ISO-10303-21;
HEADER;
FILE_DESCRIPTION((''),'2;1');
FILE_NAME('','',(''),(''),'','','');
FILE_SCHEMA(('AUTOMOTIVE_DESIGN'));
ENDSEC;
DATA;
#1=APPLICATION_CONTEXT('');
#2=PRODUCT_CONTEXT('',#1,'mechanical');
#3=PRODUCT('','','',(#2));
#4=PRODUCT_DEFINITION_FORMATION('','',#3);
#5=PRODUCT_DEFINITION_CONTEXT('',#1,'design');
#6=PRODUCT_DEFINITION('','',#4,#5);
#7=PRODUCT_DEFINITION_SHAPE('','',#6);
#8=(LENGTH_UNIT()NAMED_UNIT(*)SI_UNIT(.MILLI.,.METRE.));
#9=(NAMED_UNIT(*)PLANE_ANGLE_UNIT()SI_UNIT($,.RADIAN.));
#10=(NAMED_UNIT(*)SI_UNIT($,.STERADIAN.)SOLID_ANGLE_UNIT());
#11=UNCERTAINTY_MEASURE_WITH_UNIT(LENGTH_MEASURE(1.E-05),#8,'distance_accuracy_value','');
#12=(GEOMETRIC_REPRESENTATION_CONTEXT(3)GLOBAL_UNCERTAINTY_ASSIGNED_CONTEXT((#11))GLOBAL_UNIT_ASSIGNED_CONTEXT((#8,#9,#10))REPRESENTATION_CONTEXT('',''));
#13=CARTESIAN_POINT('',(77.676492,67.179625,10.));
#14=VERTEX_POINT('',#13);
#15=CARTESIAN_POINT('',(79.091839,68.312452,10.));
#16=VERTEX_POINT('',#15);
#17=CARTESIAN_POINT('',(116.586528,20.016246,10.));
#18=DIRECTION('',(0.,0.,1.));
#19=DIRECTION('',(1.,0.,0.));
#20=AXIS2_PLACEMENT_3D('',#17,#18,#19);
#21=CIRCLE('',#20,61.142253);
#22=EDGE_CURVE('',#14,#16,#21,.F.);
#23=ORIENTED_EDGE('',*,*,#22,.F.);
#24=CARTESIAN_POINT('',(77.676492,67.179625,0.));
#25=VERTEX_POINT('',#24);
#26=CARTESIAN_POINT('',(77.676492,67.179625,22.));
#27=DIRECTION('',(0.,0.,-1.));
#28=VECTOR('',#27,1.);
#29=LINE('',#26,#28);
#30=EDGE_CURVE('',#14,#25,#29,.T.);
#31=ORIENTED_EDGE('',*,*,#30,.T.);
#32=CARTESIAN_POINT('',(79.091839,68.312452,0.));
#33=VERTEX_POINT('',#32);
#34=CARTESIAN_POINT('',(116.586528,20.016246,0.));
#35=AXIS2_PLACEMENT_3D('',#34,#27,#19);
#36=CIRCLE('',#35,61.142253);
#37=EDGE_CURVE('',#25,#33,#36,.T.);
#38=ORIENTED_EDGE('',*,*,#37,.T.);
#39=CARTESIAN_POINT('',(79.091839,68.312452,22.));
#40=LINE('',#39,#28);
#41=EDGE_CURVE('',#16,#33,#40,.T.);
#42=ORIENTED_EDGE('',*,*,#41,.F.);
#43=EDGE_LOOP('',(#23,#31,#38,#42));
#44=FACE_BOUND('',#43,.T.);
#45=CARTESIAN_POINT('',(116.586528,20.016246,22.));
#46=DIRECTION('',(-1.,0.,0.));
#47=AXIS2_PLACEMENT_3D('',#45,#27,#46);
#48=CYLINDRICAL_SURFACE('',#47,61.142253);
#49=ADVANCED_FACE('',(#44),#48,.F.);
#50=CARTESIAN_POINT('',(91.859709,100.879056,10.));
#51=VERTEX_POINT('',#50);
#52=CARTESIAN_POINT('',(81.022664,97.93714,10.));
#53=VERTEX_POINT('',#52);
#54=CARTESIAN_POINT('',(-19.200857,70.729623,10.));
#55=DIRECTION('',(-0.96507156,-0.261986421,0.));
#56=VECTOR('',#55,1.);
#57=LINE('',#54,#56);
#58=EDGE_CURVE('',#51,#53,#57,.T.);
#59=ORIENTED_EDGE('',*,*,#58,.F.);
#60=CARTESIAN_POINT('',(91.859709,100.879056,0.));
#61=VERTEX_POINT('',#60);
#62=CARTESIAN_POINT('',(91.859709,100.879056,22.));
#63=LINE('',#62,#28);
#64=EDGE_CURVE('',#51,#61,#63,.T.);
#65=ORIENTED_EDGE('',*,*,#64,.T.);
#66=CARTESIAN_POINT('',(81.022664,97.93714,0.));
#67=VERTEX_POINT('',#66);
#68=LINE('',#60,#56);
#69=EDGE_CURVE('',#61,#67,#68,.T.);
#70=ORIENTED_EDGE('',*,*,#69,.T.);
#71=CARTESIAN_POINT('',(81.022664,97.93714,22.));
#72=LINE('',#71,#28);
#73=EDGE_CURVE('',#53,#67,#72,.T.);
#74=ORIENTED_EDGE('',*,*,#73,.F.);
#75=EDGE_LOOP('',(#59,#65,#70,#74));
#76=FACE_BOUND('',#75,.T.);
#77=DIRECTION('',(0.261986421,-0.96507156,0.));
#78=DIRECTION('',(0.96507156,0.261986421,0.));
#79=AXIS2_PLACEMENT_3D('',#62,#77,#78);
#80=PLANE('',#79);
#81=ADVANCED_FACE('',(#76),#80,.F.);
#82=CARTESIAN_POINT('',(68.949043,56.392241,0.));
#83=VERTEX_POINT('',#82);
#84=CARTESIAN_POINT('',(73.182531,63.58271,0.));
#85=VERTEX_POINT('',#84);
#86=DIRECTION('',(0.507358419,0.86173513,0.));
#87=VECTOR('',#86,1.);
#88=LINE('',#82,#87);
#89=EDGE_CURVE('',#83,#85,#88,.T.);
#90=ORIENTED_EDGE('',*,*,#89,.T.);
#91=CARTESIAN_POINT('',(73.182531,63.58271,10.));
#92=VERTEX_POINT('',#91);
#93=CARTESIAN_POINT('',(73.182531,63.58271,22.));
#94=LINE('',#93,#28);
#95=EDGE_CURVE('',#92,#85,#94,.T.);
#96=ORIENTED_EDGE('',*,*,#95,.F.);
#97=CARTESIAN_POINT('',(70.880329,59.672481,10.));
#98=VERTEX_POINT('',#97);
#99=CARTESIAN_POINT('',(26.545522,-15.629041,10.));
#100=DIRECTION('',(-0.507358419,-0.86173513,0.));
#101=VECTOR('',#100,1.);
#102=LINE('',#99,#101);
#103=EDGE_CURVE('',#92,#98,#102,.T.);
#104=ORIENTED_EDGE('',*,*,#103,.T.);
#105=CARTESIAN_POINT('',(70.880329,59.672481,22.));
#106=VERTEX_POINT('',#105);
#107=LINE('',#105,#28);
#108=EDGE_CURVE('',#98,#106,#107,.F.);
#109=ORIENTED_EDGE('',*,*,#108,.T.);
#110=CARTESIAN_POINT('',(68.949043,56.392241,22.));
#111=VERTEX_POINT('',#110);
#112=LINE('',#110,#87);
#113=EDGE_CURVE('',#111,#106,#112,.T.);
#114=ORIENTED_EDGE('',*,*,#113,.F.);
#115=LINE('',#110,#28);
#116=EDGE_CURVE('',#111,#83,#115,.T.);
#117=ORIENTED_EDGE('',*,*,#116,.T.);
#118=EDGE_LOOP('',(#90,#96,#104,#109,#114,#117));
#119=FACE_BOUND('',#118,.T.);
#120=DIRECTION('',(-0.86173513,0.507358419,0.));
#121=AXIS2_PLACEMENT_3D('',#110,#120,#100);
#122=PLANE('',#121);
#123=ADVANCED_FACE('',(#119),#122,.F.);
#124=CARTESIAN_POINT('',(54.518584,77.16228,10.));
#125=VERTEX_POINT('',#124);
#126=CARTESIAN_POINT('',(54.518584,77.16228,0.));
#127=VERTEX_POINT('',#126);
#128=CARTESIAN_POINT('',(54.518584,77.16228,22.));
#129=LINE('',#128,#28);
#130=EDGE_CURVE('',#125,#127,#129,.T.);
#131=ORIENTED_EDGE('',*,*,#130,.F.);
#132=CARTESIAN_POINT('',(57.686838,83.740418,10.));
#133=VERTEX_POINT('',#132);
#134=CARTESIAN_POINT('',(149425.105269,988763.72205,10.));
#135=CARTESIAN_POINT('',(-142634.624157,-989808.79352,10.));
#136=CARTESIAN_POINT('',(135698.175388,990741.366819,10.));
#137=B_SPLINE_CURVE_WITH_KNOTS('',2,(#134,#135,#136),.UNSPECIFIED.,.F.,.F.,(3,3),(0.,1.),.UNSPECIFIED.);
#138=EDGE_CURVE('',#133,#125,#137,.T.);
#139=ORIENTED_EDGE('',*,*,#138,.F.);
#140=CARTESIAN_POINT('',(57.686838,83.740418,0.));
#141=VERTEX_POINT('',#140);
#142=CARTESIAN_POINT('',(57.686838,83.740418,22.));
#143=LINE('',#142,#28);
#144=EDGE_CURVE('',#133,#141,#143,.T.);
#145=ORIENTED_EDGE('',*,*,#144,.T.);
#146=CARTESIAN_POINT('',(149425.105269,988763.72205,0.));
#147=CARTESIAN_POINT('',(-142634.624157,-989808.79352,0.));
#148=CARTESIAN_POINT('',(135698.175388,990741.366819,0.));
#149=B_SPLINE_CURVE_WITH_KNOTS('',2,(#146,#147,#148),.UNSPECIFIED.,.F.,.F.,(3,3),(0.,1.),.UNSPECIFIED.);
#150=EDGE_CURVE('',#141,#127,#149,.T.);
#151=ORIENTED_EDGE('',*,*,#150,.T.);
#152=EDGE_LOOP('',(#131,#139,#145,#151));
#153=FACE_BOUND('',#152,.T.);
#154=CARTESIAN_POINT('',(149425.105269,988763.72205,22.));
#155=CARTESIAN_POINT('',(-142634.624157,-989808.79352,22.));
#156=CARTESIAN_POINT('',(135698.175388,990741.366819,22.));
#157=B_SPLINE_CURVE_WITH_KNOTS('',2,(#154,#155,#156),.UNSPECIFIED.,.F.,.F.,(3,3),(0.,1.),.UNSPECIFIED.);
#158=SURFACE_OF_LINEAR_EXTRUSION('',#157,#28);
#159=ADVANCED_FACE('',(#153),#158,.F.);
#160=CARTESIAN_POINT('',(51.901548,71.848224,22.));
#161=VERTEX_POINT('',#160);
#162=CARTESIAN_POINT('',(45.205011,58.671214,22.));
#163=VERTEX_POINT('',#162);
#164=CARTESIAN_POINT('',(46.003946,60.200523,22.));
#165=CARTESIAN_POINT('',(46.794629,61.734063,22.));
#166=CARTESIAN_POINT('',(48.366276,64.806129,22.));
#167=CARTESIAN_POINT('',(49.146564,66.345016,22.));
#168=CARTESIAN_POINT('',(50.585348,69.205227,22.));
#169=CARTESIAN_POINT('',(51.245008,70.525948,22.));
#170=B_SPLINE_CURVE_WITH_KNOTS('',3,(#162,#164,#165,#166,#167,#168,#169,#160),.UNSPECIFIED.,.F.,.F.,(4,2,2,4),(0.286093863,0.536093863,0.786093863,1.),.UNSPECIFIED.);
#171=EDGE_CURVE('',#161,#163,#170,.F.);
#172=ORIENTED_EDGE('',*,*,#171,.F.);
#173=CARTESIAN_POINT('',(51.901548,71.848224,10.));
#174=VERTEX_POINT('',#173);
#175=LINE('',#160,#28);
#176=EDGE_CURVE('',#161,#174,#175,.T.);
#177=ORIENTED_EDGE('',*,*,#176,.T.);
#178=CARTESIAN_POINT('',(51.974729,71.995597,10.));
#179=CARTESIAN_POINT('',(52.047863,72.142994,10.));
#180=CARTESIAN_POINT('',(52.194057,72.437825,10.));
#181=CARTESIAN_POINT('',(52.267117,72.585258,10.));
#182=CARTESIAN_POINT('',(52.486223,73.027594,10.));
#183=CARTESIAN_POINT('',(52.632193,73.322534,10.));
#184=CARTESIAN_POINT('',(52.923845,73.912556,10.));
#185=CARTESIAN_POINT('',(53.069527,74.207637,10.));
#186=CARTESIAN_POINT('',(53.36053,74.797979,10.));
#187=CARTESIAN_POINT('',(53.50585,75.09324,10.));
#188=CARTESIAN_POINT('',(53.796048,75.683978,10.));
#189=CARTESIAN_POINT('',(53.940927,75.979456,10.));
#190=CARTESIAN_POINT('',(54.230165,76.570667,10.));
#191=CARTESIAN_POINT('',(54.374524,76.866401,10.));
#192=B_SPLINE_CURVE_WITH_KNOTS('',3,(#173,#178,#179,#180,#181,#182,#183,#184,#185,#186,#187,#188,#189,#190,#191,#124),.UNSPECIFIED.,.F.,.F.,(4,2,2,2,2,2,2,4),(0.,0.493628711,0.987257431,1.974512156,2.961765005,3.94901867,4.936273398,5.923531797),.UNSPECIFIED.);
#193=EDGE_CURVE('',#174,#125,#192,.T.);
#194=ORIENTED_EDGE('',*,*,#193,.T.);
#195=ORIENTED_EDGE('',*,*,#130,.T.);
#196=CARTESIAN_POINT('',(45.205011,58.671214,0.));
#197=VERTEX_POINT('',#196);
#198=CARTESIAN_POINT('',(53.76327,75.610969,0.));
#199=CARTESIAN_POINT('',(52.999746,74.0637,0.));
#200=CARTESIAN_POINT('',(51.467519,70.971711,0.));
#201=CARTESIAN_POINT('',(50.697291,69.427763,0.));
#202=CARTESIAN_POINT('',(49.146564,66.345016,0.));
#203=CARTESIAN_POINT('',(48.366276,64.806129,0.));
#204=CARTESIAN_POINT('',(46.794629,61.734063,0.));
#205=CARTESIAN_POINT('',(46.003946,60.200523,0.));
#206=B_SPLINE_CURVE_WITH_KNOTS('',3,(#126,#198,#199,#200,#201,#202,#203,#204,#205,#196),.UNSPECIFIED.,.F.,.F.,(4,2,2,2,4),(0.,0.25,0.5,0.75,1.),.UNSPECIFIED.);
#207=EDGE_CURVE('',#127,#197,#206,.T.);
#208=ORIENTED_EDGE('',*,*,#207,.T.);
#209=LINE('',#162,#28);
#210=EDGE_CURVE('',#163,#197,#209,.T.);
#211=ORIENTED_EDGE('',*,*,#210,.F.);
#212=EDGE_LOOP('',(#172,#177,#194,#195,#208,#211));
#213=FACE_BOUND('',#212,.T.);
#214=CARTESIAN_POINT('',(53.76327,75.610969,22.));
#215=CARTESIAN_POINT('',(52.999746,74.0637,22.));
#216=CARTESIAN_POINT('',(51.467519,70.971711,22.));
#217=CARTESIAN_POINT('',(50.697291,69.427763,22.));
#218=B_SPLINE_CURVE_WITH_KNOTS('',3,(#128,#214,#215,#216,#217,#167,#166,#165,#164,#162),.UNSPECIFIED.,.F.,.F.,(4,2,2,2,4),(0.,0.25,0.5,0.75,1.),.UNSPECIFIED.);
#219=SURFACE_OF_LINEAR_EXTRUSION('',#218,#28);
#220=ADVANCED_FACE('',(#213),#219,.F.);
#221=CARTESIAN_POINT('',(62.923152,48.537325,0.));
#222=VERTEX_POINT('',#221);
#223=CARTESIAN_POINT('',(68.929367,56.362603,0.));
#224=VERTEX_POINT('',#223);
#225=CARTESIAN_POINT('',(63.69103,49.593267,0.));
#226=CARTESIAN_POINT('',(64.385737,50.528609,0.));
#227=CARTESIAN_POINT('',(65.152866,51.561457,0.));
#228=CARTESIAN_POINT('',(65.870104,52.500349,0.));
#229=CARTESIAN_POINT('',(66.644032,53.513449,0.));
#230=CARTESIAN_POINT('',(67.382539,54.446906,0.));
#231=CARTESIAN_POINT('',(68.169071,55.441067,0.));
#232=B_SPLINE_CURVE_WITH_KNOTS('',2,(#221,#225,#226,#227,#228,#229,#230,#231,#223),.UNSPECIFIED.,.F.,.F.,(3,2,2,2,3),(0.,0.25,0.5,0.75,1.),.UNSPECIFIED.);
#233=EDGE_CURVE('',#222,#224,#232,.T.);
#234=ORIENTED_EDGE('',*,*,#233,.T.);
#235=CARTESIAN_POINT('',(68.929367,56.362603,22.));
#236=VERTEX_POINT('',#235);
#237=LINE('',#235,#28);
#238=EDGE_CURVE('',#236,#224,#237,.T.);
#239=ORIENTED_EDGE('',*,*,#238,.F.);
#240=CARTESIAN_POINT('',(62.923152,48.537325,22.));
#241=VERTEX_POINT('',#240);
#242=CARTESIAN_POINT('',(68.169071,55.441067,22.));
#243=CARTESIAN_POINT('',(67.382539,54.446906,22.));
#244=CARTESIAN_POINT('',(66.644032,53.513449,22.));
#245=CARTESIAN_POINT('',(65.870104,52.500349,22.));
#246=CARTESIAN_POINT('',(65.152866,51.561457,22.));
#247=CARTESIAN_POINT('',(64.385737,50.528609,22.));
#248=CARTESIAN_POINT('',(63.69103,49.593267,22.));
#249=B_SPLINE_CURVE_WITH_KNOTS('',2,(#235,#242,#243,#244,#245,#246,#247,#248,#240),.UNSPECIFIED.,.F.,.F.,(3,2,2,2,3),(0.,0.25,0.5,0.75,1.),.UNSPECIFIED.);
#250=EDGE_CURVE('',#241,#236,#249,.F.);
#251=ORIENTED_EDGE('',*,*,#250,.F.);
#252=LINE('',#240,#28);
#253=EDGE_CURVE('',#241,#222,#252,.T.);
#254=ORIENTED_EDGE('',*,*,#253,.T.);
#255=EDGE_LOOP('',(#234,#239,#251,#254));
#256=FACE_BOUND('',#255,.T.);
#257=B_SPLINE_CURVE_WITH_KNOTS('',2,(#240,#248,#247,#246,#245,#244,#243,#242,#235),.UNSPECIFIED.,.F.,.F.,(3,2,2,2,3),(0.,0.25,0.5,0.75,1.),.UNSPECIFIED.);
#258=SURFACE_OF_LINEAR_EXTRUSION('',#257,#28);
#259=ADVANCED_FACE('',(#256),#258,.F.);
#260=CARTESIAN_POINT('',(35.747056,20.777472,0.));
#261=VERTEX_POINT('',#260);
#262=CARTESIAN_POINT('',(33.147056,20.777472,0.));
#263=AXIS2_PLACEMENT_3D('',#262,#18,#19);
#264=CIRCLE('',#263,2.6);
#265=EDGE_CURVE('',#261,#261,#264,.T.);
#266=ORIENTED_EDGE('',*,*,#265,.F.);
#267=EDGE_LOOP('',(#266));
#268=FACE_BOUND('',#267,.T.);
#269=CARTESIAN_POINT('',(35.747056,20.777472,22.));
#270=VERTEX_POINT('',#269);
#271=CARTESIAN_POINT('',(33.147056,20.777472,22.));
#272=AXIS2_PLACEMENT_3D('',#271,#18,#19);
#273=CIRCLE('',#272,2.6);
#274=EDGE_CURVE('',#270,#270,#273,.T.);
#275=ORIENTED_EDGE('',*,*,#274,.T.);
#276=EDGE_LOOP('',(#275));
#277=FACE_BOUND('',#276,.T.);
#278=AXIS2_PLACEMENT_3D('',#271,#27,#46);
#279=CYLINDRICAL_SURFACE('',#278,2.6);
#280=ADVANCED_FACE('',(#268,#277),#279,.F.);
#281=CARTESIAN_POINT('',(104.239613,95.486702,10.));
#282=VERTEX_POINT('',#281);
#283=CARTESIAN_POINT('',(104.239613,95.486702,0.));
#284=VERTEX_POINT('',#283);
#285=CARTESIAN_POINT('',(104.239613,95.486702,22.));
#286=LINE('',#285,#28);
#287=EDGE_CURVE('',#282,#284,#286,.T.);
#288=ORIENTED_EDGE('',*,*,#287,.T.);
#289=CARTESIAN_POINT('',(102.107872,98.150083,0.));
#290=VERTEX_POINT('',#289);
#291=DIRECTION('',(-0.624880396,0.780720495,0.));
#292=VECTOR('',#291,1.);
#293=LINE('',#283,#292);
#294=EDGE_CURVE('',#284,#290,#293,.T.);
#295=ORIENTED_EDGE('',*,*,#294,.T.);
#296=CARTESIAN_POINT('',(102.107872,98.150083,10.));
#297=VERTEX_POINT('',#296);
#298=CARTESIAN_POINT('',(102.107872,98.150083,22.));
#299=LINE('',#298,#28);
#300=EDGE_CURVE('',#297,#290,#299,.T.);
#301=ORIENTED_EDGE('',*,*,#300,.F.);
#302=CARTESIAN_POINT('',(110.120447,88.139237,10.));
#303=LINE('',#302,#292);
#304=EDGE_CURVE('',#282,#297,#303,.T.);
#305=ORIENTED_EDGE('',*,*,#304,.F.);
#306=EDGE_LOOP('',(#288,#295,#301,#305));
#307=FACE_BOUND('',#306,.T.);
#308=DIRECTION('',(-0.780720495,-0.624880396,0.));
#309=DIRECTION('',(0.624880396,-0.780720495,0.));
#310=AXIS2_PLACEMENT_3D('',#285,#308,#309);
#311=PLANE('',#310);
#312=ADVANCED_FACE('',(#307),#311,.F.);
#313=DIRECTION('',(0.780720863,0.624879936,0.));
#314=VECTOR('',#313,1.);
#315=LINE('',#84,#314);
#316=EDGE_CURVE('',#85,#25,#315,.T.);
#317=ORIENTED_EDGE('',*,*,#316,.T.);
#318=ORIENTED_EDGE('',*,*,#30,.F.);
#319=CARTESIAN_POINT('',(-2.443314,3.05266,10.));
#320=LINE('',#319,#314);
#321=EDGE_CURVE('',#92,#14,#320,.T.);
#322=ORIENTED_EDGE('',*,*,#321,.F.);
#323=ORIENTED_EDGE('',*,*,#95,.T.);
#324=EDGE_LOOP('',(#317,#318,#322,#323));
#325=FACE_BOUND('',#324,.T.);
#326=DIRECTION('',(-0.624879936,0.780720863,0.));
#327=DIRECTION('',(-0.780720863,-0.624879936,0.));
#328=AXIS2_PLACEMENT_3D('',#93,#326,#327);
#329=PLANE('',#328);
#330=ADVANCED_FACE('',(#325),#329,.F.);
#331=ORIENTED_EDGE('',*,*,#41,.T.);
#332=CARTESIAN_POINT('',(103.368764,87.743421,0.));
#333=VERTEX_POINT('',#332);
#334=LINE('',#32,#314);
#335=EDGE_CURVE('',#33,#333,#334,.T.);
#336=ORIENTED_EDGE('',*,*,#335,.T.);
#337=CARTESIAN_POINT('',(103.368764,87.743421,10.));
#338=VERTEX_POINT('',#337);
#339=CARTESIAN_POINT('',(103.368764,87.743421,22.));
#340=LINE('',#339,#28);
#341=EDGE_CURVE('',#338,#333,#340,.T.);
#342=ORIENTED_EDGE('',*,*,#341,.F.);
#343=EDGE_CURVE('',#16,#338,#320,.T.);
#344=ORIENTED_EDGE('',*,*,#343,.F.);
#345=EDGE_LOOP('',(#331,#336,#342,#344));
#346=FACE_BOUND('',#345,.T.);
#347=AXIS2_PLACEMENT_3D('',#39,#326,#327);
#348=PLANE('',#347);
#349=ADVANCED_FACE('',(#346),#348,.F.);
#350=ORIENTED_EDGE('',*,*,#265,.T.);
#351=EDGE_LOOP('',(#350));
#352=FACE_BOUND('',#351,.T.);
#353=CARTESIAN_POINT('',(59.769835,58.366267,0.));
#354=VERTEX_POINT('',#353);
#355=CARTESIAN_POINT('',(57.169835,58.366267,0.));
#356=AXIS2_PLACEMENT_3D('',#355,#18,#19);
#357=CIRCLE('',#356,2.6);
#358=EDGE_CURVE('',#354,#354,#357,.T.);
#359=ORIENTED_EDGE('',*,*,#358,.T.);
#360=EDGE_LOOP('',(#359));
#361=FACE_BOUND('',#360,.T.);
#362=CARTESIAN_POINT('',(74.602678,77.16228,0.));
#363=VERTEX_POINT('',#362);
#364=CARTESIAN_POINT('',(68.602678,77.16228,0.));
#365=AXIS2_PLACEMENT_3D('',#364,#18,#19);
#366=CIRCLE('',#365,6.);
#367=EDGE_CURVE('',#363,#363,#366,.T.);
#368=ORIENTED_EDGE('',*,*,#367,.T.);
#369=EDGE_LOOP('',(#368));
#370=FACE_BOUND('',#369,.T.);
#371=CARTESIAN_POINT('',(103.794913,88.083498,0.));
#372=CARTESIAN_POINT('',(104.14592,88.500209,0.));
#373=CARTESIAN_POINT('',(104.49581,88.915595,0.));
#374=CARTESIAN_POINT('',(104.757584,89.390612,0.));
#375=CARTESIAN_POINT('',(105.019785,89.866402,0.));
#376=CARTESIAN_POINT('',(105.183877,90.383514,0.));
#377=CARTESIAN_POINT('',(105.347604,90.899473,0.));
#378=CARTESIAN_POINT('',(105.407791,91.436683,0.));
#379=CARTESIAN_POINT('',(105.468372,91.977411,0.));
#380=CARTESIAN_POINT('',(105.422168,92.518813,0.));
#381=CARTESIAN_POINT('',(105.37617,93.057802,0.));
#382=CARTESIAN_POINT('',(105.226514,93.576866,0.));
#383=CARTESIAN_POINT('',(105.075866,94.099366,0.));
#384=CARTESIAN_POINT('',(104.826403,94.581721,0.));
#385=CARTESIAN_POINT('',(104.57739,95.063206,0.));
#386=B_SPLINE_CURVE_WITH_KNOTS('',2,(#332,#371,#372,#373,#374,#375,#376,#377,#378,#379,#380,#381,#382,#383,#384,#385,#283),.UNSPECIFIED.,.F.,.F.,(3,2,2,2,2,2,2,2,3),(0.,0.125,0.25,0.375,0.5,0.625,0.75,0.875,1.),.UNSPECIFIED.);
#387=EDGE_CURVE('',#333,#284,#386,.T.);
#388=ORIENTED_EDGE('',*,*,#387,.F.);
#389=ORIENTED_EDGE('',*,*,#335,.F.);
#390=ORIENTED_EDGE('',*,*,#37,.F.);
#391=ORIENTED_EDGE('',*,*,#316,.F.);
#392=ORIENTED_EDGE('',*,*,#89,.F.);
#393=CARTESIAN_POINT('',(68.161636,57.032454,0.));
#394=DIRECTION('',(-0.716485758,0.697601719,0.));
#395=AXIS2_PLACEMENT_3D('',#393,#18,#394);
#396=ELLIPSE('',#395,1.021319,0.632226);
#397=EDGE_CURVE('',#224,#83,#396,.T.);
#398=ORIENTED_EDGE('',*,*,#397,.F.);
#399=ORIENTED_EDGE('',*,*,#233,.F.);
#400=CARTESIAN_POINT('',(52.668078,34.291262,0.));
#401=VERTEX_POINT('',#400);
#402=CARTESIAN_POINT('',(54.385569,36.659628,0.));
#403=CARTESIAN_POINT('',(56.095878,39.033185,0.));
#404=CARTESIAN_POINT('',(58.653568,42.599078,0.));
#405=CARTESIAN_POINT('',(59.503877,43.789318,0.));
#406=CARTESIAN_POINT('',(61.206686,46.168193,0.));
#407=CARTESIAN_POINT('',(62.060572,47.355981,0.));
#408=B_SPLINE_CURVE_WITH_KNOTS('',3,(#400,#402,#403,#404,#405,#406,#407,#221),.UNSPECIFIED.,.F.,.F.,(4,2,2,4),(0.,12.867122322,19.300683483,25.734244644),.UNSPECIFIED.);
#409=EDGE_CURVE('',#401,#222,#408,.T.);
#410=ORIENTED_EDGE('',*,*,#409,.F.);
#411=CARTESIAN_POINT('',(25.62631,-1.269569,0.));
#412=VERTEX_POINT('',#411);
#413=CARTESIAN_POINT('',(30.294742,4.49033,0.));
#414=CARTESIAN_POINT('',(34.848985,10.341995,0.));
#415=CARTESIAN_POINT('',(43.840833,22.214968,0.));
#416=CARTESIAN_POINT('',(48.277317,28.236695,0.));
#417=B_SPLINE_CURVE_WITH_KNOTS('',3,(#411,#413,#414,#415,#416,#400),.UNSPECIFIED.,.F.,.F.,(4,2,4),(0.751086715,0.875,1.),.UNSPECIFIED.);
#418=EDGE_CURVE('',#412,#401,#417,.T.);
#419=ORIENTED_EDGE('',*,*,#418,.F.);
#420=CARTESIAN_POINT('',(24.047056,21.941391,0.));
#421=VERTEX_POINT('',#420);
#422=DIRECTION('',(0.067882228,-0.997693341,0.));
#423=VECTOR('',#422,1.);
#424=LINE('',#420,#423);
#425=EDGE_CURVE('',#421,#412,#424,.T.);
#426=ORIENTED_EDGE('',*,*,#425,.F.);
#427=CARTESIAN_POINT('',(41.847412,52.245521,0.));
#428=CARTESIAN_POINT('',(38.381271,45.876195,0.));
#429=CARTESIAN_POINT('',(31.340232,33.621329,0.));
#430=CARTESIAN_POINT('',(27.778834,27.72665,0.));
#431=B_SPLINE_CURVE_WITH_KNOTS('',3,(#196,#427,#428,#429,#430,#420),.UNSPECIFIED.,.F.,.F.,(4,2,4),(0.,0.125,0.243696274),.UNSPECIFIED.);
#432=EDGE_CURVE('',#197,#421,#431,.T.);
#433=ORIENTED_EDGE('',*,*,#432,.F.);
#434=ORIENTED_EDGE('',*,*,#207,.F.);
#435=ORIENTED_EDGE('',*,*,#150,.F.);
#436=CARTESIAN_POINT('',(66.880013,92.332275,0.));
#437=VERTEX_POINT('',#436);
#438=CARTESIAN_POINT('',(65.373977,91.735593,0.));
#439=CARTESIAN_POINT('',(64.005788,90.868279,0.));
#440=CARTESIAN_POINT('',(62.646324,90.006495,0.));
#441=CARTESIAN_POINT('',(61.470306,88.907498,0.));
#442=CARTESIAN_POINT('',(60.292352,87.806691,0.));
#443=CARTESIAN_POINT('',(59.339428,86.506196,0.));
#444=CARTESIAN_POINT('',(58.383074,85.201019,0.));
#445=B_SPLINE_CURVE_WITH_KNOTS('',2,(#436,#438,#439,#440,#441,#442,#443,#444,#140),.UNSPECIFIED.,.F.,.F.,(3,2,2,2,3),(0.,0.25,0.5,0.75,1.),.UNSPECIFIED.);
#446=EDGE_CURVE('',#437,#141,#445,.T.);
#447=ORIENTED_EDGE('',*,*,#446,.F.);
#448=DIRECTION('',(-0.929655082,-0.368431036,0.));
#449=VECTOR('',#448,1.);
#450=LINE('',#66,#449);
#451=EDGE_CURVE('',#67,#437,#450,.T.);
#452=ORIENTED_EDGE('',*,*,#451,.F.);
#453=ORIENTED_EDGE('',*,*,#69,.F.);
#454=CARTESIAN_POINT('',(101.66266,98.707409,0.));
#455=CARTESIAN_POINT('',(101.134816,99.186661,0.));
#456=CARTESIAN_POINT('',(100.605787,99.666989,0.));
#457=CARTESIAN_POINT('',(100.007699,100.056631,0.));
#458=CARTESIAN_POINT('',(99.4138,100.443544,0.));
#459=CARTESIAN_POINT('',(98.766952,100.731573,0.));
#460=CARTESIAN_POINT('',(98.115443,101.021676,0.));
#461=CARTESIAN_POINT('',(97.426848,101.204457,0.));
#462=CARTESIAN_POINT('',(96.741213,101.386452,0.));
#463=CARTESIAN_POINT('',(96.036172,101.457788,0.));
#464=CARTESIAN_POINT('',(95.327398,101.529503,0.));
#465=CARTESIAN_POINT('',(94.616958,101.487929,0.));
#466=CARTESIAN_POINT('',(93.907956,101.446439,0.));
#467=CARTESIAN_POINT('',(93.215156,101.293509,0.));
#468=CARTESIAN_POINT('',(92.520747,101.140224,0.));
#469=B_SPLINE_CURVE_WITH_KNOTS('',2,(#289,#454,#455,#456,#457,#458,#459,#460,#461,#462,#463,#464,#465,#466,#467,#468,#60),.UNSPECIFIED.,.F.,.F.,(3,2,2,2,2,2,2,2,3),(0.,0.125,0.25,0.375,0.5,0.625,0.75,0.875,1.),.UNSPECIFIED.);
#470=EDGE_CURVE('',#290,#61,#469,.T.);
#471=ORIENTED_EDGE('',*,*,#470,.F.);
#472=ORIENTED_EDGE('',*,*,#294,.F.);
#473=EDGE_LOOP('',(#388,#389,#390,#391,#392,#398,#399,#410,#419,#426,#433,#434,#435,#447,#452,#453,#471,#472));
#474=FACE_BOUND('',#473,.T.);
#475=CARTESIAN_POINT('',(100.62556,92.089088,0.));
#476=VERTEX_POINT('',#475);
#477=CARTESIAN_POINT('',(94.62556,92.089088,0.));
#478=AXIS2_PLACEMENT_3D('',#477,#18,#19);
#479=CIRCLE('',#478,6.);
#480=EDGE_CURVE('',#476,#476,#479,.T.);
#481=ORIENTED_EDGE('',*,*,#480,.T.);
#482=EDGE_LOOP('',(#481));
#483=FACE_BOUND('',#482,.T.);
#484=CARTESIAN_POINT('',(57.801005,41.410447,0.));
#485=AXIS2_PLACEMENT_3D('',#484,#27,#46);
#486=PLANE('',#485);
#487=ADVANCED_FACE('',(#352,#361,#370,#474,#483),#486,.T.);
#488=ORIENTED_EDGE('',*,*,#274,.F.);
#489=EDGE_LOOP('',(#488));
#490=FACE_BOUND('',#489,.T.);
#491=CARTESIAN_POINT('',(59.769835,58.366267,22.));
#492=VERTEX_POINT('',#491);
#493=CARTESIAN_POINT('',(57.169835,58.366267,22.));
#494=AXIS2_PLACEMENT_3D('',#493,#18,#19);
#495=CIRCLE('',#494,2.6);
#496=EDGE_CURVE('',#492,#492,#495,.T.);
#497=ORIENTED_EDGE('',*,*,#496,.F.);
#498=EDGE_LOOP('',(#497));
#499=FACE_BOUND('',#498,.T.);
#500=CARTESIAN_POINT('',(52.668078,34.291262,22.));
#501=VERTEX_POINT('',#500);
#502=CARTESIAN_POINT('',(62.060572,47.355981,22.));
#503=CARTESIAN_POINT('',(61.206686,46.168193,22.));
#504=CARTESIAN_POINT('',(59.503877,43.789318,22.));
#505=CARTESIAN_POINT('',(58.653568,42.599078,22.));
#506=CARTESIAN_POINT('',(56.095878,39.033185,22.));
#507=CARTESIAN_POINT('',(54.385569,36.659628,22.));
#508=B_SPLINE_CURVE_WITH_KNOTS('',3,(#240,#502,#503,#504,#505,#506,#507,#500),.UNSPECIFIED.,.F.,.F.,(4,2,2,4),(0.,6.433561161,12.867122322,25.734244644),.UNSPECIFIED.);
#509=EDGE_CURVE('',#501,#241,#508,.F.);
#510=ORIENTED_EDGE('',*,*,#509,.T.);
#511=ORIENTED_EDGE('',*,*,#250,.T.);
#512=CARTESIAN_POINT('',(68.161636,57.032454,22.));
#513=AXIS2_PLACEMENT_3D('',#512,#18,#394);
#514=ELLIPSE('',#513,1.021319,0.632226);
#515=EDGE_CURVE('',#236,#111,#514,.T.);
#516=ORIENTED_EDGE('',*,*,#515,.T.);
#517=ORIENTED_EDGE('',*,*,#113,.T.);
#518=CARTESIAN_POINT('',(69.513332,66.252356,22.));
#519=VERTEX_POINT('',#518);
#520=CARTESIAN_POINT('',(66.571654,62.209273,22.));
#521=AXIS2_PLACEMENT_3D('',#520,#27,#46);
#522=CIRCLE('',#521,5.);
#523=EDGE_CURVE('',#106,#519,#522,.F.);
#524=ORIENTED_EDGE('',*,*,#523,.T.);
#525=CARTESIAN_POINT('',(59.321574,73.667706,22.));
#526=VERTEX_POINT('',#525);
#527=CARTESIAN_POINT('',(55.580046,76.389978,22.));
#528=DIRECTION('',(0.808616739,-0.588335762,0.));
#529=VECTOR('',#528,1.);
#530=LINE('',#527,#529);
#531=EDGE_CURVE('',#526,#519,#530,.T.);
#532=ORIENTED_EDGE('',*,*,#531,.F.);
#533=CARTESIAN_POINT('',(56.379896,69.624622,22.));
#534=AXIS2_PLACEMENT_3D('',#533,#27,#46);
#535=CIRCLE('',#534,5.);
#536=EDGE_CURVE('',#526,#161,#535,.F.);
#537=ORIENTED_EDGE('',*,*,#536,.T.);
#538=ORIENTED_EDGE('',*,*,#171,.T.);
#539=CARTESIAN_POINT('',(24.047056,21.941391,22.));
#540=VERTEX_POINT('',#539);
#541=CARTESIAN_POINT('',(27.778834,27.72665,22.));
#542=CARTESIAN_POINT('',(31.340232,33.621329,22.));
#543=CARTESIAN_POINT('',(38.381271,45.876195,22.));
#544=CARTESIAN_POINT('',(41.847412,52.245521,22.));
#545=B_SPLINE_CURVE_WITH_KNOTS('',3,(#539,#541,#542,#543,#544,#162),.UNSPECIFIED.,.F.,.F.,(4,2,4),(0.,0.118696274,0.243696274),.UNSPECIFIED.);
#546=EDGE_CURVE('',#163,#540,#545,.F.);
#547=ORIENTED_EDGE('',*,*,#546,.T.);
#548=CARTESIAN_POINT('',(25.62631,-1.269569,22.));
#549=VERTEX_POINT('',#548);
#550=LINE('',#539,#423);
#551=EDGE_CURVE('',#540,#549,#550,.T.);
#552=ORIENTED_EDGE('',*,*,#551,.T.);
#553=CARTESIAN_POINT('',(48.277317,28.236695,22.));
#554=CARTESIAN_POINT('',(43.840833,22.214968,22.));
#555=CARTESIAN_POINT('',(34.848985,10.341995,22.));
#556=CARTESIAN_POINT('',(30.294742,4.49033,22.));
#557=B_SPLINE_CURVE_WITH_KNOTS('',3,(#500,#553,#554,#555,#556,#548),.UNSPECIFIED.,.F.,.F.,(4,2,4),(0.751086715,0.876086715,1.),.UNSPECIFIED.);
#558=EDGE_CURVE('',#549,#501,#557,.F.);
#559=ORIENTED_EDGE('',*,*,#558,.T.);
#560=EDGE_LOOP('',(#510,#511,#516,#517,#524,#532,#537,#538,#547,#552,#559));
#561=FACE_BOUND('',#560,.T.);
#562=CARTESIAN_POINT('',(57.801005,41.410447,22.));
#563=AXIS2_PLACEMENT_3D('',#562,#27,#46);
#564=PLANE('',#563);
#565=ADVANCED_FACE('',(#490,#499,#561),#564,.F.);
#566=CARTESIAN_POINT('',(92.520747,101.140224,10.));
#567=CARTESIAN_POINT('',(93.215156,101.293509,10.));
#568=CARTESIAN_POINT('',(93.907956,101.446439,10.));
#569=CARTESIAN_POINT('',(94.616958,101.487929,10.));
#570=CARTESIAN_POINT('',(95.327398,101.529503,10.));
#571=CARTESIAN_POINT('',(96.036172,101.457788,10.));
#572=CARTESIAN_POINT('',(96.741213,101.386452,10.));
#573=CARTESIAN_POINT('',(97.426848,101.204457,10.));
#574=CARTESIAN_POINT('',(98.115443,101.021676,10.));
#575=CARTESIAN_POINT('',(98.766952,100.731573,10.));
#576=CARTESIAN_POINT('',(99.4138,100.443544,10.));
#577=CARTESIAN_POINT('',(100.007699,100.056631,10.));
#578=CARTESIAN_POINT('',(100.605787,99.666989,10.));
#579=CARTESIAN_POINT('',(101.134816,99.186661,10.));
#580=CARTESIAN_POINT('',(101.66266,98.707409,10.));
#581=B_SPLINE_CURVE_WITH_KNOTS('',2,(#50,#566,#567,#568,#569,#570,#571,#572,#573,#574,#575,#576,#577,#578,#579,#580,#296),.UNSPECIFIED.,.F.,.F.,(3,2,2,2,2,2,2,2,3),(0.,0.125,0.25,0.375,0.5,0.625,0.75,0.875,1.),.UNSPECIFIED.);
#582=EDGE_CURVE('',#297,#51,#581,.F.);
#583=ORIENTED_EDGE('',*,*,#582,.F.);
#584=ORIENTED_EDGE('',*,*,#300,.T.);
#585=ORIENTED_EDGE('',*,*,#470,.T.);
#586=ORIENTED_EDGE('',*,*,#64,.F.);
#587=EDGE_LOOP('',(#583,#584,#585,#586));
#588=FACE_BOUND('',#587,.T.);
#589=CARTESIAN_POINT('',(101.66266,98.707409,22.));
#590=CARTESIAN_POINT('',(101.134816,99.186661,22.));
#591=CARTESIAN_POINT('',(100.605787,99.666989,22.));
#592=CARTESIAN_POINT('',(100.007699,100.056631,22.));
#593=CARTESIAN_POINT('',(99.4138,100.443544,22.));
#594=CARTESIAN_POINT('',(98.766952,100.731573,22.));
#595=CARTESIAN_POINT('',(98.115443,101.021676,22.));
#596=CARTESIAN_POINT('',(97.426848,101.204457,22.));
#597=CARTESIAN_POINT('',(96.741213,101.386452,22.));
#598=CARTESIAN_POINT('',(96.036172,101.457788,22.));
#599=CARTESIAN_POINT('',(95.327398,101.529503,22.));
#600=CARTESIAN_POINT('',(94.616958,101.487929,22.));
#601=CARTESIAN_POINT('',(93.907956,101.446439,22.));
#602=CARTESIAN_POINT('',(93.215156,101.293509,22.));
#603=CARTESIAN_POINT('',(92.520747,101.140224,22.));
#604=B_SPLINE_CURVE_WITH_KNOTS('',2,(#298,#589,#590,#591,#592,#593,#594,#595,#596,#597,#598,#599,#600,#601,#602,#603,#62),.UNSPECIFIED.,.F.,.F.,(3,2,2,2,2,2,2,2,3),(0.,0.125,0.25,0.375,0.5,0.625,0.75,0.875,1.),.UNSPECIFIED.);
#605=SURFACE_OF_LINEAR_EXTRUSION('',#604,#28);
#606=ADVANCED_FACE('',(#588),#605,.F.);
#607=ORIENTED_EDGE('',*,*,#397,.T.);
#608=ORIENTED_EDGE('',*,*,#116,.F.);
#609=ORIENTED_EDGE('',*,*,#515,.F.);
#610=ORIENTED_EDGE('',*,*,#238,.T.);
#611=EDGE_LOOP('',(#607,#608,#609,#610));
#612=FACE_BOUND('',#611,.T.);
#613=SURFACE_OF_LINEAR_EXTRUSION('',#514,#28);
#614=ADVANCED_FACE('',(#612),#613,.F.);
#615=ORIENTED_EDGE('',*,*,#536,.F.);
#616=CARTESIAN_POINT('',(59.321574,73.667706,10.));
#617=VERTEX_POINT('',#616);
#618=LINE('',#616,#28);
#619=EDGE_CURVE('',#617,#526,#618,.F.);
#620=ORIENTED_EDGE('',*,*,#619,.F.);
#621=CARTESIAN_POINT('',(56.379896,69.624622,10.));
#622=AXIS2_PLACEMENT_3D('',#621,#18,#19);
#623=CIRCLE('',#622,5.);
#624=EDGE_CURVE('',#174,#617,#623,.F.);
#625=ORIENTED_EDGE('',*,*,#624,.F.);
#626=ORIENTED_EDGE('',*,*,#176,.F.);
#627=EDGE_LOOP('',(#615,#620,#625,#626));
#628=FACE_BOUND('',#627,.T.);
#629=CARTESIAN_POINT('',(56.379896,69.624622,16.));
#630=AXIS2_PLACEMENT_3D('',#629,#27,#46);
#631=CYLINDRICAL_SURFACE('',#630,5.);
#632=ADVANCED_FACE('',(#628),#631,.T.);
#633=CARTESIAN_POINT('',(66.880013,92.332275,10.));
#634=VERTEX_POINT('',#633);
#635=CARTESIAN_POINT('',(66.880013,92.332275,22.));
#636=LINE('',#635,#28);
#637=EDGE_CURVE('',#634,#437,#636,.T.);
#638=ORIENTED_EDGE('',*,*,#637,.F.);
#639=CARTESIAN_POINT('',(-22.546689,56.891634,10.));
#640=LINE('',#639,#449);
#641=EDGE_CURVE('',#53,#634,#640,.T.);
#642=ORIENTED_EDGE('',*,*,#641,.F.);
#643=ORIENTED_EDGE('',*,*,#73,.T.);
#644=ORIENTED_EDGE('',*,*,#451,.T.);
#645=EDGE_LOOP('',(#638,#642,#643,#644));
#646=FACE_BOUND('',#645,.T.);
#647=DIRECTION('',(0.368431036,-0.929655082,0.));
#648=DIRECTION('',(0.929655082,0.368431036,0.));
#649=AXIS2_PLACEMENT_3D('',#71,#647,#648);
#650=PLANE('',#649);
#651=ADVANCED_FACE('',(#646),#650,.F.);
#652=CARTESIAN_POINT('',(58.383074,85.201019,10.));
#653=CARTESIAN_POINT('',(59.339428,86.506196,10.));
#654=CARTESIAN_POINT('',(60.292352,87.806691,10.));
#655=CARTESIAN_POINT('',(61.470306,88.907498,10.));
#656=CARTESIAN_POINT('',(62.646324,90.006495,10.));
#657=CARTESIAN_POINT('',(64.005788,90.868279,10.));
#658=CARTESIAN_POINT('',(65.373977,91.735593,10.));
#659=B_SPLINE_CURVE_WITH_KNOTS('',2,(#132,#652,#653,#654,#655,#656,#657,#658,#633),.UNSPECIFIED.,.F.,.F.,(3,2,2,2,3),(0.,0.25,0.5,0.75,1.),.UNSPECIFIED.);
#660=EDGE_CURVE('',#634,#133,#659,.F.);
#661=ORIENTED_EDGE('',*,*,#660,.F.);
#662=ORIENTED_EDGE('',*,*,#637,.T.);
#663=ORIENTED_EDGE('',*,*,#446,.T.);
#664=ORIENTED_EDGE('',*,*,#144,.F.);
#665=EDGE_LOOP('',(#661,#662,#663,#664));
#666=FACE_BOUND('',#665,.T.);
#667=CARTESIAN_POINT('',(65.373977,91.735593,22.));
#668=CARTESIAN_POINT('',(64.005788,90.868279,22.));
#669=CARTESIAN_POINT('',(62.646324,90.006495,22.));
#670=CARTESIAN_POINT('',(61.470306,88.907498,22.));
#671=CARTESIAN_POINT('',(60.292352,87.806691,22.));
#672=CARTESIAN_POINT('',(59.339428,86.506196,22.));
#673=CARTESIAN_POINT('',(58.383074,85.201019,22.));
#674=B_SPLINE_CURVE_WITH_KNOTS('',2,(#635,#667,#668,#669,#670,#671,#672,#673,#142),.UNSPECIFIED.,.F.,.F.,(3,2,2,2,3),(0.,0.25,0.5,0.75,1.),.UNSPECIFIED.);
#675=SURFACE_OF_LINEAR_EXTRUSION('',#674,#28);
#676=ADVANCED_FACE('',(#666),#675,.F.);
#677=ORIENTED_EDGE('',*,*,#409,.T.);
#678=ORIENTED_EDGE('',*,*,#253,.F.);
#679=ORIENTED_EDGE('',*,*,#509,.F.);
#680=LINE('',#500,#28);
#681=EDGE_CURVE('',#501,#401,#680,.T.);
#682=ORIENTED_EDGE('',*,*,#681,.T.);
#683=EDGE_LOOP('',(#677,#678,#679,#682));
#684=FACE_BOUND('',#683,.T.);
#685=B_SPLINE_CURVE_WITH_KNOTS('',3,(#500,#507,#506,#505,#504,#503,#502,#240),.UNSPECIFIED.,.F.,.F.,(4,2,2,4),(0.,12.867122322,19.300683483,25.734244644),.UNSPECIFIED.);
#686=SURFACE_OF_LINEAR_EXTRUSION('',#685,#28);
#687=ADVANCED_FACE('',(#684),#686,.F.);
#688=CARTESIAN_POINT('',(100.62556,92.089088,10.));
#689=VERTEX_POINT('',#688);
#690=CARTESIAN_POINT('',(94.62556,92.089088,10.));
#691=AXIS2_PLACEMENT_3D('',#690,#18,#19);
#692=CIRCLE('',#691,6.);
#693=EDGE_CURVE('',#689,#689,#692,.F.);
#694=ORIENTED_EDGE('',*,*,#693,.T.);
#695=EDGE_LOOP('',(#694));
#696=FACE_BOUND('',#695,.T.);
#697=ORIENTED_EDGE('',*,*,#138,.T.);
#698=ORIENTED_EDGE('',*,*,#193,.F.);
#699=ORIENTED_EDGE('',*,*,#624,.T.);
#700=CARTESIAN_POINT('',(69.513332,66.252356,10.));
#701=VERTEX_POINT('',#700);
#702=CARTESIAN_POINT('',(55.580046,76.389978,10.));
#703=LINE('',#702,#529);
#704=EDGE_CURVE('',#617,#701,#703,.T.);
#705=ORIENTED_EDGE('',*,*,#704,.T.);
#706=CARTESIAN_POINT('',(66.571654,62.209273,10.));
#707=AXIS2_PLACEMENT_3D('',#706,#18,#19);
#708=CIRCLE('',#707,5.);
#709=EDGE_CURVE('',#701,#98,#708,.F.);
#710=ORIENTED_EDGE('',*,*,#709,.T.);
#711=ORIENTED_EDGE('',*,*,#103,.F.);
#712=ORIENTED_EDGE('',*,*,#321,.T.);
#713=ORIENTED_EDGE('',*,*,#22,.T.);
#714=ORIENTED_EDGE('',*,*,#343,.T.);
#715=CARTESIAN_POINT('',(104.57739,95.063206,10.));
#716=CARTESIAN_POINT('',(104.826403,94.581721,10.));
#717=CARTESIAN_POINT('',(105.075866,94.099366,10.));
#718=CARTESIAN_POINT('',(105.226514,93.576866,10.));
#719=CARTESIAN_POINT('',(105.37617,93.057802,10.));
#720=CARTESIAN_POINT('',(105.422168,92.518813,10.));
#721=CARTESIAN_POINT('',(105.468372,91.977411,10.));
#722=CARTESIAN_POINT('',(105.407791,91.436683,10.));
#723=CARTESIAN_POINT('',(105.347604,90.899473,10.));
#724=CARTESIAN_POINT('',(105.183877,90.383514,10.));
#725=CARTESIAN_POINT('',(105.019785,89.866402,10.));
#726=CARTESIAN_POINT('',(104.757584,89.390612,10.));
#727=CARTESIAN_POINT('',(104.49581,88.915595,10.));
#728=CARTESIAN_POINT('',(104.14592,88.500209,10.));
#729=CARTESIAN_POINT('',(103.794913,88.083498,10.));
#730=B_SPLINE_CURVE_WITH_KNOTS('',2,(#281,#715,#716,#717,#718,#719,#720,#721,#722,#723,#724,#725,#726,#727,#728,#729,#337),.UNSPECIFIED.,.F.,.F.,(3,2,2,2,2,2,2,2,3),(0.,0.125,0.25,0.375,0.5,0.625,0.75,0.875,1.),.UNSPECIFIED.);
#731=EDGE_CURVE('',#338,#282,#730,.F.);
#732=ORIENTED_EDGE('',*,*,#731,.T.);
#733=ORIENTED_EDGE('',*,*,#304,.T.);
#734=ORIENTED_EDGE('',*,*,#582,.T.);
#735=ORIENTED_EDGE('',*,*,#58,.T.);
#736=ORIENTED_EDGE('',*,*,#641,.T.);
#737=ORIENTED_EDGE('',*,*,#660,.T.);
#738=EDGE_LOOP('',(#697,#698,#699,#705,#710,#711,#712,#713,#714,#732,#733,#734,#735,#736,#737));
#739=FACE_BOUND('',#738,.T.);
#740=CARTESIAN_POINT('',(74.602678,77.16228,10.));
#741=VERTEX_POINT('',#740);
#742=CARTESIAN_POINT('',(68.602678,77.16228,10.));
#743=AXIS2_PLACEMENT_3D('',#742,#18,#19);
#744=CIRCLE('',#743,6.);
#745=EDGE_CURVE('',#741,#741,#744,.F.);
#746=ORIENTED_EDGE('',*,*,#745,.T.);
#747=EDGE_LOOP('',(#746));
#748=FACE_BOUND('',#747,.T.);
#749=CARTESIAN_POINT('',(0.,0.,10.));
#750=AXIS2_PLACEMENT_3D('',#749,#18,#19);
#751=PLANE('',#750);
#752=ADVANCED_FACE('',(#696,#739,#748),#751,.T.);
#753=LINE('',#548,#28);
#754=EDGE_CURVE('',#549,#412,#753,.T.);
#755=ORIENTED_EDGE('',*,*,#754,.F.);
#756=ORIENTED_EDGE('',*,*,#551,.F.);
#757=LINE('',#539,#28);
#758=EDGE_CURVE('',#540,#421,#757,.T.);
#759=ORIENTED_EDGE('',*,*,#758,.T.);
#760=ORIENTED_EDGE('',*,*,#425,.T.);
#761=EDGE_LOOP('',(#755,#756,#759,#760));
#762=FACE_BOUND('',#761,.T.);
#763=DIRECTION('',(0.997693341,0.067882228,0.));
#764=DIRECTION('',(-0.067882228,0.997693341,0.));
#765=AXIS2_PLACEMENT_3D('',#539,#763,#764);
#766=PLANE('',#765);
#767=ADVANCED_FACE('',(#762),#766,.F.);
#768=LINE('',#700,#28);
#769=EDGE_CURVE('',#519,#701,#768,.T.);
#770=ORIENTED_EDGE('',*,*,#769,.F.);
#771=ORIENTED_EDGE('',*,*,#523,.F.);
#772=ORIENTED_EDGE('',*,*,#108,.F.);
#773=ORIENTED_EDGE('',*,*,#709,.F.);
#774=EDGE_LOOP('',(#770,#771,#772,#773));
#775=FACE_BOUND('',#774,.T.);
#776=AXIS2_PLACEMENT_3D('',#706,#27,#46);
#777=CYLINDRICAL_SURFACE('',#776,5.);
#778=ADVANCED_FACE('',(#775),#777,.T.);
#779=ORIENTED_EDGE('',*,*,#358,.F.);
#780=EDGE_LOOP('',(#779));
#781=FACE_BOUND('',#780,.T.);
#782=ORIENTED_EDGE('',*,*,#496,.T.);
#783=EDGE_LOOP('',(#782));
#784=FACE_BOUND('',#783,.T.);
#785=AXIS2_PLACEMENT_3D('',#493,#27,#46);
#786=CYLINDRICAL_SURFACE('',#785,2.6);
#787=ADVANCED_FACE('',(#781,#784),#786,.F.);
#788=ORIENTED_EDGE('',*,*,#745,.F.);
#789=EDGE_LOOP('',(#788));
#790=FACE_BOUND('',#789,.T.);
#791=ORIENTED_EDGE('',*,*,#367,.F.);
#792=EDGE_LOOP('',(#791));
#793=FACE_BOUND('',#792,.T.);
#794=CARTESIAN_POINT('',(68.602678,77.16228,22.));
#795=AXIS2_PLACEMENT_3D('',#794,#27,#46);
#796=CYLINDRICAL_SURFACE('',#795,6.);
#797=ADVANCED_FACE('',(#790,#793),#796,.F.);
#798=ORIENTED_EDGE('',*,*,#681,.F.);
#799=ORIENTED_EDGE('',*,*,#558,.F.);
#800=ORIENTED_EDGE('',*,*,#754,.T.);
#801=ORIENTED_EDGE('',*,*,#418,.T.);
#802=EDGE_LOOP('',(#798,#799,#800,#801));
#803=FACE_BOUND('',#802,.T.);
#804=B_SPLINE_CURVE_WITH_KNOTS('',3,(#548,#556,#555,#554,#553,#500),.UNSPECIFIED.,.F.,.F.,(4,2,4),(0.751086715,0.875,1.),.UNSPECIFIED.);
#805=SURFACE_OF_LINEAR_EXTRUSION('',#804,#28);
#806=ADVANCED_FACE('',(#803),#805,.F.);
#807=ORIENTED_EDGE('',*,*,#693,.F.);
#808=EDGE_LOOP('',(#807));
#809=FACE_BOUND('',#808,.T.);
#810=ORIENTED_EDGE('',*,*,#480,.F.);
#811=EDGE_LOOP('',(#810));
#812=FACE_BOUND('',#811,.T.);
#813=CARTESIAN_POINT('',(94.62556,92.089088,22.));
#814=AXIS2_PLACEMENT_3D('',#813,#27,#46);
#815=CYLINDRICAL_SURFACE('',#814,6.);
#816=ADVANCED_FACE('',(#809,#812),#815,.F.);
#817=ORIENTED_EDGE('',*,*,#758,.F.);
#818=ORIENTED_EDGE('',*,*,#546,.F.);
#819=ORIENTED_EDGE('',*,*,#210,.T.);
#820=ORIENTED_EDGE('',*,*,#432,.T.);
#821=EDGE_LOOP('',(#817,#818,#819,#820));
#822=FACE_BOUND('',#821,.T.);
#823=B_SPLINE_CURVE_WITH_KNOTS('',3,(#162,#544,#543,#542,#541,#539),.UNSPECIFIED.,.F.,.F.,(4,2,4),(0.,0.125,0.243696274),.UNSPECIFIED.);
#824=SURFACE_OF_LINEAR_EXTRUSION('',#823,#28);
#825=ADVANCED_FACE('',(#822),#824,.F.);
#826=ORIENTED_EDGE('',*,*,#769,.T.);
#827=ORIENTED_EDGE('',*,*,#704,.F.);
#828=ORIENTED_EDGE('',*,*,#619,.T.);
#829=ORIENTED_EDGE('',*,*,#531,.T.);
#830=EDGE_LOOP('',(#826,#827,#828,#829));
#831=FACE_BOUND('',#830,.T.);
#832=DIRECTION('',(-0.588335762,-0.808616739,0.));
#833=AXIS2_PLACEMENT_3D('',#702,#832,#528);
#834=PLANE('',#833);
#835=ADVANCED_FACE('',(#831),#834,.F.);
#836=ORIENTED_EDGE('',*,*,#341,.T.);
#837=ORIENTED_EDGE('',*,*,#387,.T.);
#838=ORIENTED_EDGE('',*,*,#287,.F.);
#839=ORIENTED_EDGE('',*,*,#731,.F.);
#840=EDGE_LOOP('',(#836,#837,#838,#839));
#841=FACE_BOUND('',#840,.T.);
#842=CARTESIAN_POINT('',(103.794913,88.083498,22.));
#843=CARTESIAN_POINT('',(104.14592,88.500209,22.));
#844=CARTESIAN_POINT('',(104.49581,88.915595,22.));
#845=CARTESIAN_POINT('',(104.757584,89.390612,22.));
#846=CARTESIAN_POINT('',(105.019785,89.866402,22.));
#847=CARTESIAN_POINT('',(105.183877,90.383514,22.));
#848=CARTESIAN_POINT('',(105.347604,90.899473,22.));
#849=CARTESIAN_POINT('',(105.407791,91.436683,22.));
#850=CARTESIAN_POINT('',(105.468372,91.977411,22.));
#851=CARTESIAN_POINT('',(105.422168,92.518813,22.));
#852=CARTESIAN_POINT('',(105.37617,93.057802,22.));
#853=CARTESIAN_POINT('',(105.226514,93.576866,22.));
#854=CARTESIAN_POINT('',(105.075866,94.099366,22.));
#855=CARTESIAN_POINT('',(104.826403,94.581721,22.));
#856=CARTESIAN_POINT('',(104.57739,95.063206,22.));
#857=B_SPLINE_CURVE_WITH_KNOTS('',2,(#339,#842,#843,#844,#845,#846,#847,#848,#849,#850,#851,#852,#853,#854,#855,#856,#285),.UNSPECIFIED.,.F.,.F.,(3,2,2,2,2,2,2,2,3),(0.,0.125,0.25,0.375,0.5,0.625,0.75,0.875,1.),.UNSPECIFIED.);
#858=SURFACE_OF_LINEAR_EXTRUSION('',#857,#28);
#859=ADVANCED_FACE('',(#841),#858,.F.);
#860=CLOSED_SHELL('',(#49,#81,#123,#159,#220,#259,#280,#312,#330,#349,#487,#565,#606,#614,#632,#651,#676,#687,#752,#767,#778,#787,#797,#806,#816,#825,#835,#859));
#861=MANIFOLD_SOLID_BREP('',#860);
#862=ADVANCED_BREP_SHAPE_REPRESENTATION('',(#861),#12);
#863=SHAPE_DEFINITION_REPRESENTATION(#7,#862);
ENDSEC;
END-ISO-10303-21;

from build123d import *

# Parameters (mm, degrees)
SKETCH_1_R              = 6
SKETCH_1_R_2            = 2.6
EXTRUDE_1_DEPTH         = 22
CUT_EXTRUDE_START       = -12
CUT_EXTRUDE_1_OUTLINE_R = 6
CUT_EXTRUDE_1_DEPTH     = 12
FILLET_1_R              = 5


# Read off the part's stored shape, not the designer's step: 切除-拉伸1
with BuildPart() as part:
    # 草图1 → 凸台-拉伸1 (new body)
    with BuildSketch(Plane.XY):
        with BuildLine():
            Line((24.04705584, 21.941390991), (25.62631028, -1.269568576))
            add(Edge.make_bspline(
                [(25.62631028, -1.269568576), (30.294741582, 4.490329629), (34.848985416, 10.341994574), (43.840833171, 22.214968329), (48.277316557, 28.236694952), (52.668077763, 34.291262241)],
                knots=[0.751086715, 0.751086715, 0.751086715, 0.751086715, 0.875, 0.875, 1, 1, 1, 1], degree=3))
            add(Edge.make_bspline(
                [(52.668077763, 34.291262241), (54.385569076, 36.659627804), (56.095877797, 39.033185186), (58.65356822, 42.599078019), (59.503877121, 43.78931812), (61.206685795, 46.168192958), (62.060572053, 47.355980663), (62.923151952, 48.537325445)],
                knots=[0, 0, 0, 0, 12.867122322, 12.867122322, 19.300683483, 19.300683483, 25.734244644, 25.734244644, 25.734244644, 25.734244644], degree=3))
            add(Edge.make_bspline(
                [(62.923151952, 48.537325445), (63.691030086, 49.593267388), (64.385737457, 50.528608987), (65.152866174, 51.561457391), (65.870104463, 52.500349083), (66.644032214, 53.513449395), (67.382538536, 54.446906012), (68.169071386, 55.441067159), (68.929366855, 56.362602713)],
                knots=[0, 0, 0, 0.25, 0.25, 0.5, 0.5, 0.75, 0.75, 1, 1, 1], degree=2))
            add(Edge.make_bspline(
                [(68.929366855, 56.362602713), (68.939807825, 56.376913703), (68.94904286, 56.392240586)],
                knots=[0.088106579, 0.088106579, 0.088106579, 0.143786066, 0.143786066, 0.143786066], degree=2, weights=[1, 0.999612499, 1]))
            Line((68.94904286, 56.392240586), (73.182530774, 63.58271012))
            Line((73.182530774, 63.58271012), (77.6764923, 67.17962487))
            ThreePointArc((77.6764923, 67.17962487), (78.379967095, 67.75128437), (79.091839453, 68.312452009))
            Line((79.091839453, 68.312452009), (103.36876376, 87.743421018))
            add(Edge.make_bspline(
                [(103.36876376, 87.743421018), (103.794913212, 88.083498112), (104.14591982, 88.500209303), (104.495810247, 88.915595377), (104.757584433, 89.390611784), (105.019785316, 89.866402479), (105.18387744, 90.383514181), (105.347603834, 90.89947334), (105.407790685, 91.436682712), (105.468371762, 91.977410832), (105.422168005, 92.518813243), (105.376170251, 93.057801763), (105.226513558, 93.576866403), (105.075866476, 94.099366077), (104.826403144, 94.581721125), (104.577389608, 95.06320646), (104.239613139, 95.486702432)],
                knots=[0, 0, 0, 0.125, 0.125, 0.25, 0.25, 0.375, 0.375, 0.5, 0.5, 0.625, 0.625, 0.75, 0.75, 0.875, 0.875, 1, 1, 1], degree=2))
            Line((104.239613139, 95.486702432), (102.10787197, 98.150082549))
            add(Edge.make_bspline(
                [(102.10787197, 98.150082549), (101.662660323, 98.707408746), (101.134816221, 99.186660834), (100.605787322, 99.666988651), (100.007698858, 100.056631193), (99.413800036, 100.443544268), (98.766951597, 100.73157288), (98.115443256, 101.021676452), (97.426848492, 101.204456829), (96.741213417, 101.386451586), (96.036172435, 101.457788474), (95.327397899, 101.529503128), (94.616958411, 101.487928839), (93.907956416, 101.446438671), (93.215156177, 101.29350915), (92.520746602, 101.140224382), (91.859708878, 100.879055504)],
                knots=[0, 0, 0, 0.125, 0.125, 0.25, 0.25, 0.375, 0.375, 0.5, 0.5, 0.625, 0.625, 0.75, 0.75, 0.875, 0.875, 1, 1, 1], degree=2))
            Line((91.859708878, 100.879055504), (81.022663549, 97.937140274))
            Line((81.022663549, 97.937140274), (66.880013026, 92.33227511))
            add(Edge.make_bspline(
                [(66.880013026, 92.33227511), (65.373977149, 91.735592871), (64.00578846, 90.868278931), (62.646323986, 90.006495393), (61.470305816, 88.907497765), (60.292351586, 87.806690876), (59.339427675, 86.506195587), (58.383073515, 85.201018894), (57.686838347, 83.740417625)],
                knots=[0, 0, 0, 0.25, 0.25, 0.5, 0.5, 0.75, 0.75, 1, 1, 1], degree=2))
            add(Edge.make_bspline(
                [(57.686838347, 83.740417625), (56.095548431, 80.401632953), (54.518583687, 77.162280014)],
                knots=[0, 0, 0, 1, 1, 1], degree=2))
            add(Edge.make_bspline(
                [(54.518583687, 77.162280014), (53.763269837, 75.610969128), (52.999745837, 74.063699923), (51.467519232, 70.971710828), (50.697291265, 69.427763476), (49.146563784, 66.345016376), (48.366275895, 64.806128726), (46.794629467, 61.734063391), (46.003946156, 60.200522916), (45.205011248, 58.67121375)],
                knots=[0, 0, 0, 0, 0.25, 0.25, 0.5, 0.5, 0.75, 0.75, 1, 1, 1, 1], degree=3))
            add(Edge.make_bspline(
                [(45.205011248, 58.67121375), (41.847412181, 52.245521434), (38.381271035, 45.876195204), (31.340232317, 33.621328767), (27.77883413, 27.726649653), (24.04705584, 21.941390991)],
                knots=[0, 0, 0, 0, 0.125, 0.125, 0.243696274, 0.243696274, 0.243696274, 0.243696274], degree=3))
        make_face()
        with Locations((94.625559773, 92.089088396)):
            Circle(SKETCH_1_R, mode=Mode.SUBTRACT)
        with Locations((68.602677697, 77.162280014)):
            Circle(SKETCH_1_R, mode=Mode.SUBTRACT)
        with Locations((33.14705584, 20.777472123)):
            Circle(SKETCH_1_R_2, mode=Mode.SUBTRACT)
        with Locations((57.169835175, 58.366266824)):
            Circle(SKETCH_1_R_2, mode=Mode.SUBTRACT)
    extrude(amount=EXTRUDE_1_DEPTH)

    # 切除-拉伸1 outline → 切除-拉伸1 (cut)
    with BuildSketch(Plane.XY.offset(22).offset(CUT_EXTRUDE_START)):
        with BuildLine():
            add(Edge.make_bspline(
                [(57.686838346, 83.740417623), (56.09554843, 80.401632953), (54.518583688, 77.162280014)],
                knots=[0.494428836, 0.494428836, 0.494428836, 0.494587311, 0.494587311, 0.494587311], degree=2))
            Line((54.518583688, 77.162280014), (73.182530774, 63.58271012))
            Line((73.182530774, 63.58271012), (77.6764923, 67.17962487))
            ThreePointArc((77.6764923, 67.17962487), (78.379967095, 67.75128437), (79.091839453, 68.312452009))
            Line((79.091839453, 68.312452009), (103.36876376, 87.743421018))
            add(Edge.make_bspline(
                [(103.36876376, 87.743421018), (103.794913212, 88.083498112), (104.14591982, 88.500209303), (104.495810247, 88.915595377), (104.757584433, 89.390611784), (105.019785316, 89.866402479), (105.18387744, 90.383514181), (105.347603834, 90.89947334), (105.407790685, 91.436682712), (105.468371762, 91.977410832), (105.422168005, 92.518813243), (105.376170251, 93.057801763), (105.226513558, 93.576866403), (105.075866476, 94.099366077), (104.826403144, 94.581721125), (104.577389608, 95.06320646), (104.239613139, 95.486702432)],
                knots=[0, 0, 0, 0.125, 0.125, 0.25, 0.25, 0.375, 0.375, 0.5, 0.5, 0.625, 0.625, 0.75, 0.75, 0.875, 0.875, 1, 1, 1], degree=2))
            Line((104.239613139, 95.486702432), (102.10787197, 98.150082549))
            add(Edge.make_bspline(
                [(102.10787197, 98.150082549), (101.662660323, 98.707408746), (101.134816221, 99.186660834), (100.605787322, 99.666988651), (100.007698858, 100.056631193), (99.413800036, 100.443544268), (98.766951597, 100.73157288), (98.115443256, 101.021676452), (97.426848492, 101.204456829), (96.741213417, 101.386451586), (96.036172435, 101.457788474), (95.327397899, 101.529503128), (94.616958411, 101.487928839), (93.907956416, 101.446438671), (93.215156177, 101.29350915), (92.520746602, 101.140224382), (91.859708878, 100.879055504)],
                knots=[0, 0, 0, 0.125, 0.125, 0.25, 0.25, 0.375, 0.375, 0.5, 0.5, 0.625, 0.625, 0.75, 0.75, 0.875, 0.875, 1, 1, 1], degree=2))
            Line((91.859708878, 100.879055504), (81.022663549, 97.937140274))
            Line((81.022663549, 97.937140274), (66.880013026, 92.33227511))
            add(Edge.make_bspline(
                [(66.880013026, 92.33227511), (65.373977149, 91.735592871), (64.00578846, 90.868278931), (62.646323986, 90.006495393), (61.470305816, 88.907497765), (60.292351586, 87.806690876), (59.339427675, 86.506195587), (58.383073515, 85.201018894), (57.686838346, 83.740417623)],
                knots=[0, 0, 0, 0.25, 0.25, 0.5, 0.5, 0.75, 0.75, 1, 1, 1], degree=2))
        make_face()
        with Locations((68.602677697, 77.162280014)):
            Circle(CUT_EXTRUDE_1_OUTLINE_R, mode=Mode.SUBTRACT)
        with Locations((94.625559773, 92.089088396)):
            Circle(CUT_EXTRUDE_1_OUTLINE_R, mode=Mode.SUBTRACT)
    extrude(amount=CUT_EXTRUDE_1_DEPTH, mode=Mode.SUBTRACT)

    # 圆角1
    fillet_1_edges = [part.edges().sort_by_distance(p)[0] for p in [
        (73.182530774, 63.58271012, 16),
    ]]
    fillet(fillet_1_edges, radius=FILLET_1_R)
    # the kernel refuses this fillet: 5 mm, written as the material it takes off along each edge
    with BuildSketch(Plane(origin=(54.518583687, 77.162280014, 10), x_dir=(0.8086167393984858, -0.5883357619289866, 0), z_dir=(0, 0, 1))) as fillet_1_2_piece_1:
        with BuildLine():
            CenterArc((5.939761688, -5), FILLET_1_R, 89.999999998, 99.633547548)
            Line((1.010270575, -5.836730169), (0.911680753, -5.853464772))
            ThreePointArc((0.911680753, -5.853464772), (0.412045155, -2.934442011), (-0.098457006, -0.017499087))
            Line((-0.098457006, -0.017499087), (0, 0.1))
            Line((0, 0.1), (5.939761688, 0.1))
            Line((5.939761688, 0.1), (5.939761688, 0))
        make_face()
    extrude(amount=26.849404219, mode=Mode.SUBTRACT)


solid = part.part
